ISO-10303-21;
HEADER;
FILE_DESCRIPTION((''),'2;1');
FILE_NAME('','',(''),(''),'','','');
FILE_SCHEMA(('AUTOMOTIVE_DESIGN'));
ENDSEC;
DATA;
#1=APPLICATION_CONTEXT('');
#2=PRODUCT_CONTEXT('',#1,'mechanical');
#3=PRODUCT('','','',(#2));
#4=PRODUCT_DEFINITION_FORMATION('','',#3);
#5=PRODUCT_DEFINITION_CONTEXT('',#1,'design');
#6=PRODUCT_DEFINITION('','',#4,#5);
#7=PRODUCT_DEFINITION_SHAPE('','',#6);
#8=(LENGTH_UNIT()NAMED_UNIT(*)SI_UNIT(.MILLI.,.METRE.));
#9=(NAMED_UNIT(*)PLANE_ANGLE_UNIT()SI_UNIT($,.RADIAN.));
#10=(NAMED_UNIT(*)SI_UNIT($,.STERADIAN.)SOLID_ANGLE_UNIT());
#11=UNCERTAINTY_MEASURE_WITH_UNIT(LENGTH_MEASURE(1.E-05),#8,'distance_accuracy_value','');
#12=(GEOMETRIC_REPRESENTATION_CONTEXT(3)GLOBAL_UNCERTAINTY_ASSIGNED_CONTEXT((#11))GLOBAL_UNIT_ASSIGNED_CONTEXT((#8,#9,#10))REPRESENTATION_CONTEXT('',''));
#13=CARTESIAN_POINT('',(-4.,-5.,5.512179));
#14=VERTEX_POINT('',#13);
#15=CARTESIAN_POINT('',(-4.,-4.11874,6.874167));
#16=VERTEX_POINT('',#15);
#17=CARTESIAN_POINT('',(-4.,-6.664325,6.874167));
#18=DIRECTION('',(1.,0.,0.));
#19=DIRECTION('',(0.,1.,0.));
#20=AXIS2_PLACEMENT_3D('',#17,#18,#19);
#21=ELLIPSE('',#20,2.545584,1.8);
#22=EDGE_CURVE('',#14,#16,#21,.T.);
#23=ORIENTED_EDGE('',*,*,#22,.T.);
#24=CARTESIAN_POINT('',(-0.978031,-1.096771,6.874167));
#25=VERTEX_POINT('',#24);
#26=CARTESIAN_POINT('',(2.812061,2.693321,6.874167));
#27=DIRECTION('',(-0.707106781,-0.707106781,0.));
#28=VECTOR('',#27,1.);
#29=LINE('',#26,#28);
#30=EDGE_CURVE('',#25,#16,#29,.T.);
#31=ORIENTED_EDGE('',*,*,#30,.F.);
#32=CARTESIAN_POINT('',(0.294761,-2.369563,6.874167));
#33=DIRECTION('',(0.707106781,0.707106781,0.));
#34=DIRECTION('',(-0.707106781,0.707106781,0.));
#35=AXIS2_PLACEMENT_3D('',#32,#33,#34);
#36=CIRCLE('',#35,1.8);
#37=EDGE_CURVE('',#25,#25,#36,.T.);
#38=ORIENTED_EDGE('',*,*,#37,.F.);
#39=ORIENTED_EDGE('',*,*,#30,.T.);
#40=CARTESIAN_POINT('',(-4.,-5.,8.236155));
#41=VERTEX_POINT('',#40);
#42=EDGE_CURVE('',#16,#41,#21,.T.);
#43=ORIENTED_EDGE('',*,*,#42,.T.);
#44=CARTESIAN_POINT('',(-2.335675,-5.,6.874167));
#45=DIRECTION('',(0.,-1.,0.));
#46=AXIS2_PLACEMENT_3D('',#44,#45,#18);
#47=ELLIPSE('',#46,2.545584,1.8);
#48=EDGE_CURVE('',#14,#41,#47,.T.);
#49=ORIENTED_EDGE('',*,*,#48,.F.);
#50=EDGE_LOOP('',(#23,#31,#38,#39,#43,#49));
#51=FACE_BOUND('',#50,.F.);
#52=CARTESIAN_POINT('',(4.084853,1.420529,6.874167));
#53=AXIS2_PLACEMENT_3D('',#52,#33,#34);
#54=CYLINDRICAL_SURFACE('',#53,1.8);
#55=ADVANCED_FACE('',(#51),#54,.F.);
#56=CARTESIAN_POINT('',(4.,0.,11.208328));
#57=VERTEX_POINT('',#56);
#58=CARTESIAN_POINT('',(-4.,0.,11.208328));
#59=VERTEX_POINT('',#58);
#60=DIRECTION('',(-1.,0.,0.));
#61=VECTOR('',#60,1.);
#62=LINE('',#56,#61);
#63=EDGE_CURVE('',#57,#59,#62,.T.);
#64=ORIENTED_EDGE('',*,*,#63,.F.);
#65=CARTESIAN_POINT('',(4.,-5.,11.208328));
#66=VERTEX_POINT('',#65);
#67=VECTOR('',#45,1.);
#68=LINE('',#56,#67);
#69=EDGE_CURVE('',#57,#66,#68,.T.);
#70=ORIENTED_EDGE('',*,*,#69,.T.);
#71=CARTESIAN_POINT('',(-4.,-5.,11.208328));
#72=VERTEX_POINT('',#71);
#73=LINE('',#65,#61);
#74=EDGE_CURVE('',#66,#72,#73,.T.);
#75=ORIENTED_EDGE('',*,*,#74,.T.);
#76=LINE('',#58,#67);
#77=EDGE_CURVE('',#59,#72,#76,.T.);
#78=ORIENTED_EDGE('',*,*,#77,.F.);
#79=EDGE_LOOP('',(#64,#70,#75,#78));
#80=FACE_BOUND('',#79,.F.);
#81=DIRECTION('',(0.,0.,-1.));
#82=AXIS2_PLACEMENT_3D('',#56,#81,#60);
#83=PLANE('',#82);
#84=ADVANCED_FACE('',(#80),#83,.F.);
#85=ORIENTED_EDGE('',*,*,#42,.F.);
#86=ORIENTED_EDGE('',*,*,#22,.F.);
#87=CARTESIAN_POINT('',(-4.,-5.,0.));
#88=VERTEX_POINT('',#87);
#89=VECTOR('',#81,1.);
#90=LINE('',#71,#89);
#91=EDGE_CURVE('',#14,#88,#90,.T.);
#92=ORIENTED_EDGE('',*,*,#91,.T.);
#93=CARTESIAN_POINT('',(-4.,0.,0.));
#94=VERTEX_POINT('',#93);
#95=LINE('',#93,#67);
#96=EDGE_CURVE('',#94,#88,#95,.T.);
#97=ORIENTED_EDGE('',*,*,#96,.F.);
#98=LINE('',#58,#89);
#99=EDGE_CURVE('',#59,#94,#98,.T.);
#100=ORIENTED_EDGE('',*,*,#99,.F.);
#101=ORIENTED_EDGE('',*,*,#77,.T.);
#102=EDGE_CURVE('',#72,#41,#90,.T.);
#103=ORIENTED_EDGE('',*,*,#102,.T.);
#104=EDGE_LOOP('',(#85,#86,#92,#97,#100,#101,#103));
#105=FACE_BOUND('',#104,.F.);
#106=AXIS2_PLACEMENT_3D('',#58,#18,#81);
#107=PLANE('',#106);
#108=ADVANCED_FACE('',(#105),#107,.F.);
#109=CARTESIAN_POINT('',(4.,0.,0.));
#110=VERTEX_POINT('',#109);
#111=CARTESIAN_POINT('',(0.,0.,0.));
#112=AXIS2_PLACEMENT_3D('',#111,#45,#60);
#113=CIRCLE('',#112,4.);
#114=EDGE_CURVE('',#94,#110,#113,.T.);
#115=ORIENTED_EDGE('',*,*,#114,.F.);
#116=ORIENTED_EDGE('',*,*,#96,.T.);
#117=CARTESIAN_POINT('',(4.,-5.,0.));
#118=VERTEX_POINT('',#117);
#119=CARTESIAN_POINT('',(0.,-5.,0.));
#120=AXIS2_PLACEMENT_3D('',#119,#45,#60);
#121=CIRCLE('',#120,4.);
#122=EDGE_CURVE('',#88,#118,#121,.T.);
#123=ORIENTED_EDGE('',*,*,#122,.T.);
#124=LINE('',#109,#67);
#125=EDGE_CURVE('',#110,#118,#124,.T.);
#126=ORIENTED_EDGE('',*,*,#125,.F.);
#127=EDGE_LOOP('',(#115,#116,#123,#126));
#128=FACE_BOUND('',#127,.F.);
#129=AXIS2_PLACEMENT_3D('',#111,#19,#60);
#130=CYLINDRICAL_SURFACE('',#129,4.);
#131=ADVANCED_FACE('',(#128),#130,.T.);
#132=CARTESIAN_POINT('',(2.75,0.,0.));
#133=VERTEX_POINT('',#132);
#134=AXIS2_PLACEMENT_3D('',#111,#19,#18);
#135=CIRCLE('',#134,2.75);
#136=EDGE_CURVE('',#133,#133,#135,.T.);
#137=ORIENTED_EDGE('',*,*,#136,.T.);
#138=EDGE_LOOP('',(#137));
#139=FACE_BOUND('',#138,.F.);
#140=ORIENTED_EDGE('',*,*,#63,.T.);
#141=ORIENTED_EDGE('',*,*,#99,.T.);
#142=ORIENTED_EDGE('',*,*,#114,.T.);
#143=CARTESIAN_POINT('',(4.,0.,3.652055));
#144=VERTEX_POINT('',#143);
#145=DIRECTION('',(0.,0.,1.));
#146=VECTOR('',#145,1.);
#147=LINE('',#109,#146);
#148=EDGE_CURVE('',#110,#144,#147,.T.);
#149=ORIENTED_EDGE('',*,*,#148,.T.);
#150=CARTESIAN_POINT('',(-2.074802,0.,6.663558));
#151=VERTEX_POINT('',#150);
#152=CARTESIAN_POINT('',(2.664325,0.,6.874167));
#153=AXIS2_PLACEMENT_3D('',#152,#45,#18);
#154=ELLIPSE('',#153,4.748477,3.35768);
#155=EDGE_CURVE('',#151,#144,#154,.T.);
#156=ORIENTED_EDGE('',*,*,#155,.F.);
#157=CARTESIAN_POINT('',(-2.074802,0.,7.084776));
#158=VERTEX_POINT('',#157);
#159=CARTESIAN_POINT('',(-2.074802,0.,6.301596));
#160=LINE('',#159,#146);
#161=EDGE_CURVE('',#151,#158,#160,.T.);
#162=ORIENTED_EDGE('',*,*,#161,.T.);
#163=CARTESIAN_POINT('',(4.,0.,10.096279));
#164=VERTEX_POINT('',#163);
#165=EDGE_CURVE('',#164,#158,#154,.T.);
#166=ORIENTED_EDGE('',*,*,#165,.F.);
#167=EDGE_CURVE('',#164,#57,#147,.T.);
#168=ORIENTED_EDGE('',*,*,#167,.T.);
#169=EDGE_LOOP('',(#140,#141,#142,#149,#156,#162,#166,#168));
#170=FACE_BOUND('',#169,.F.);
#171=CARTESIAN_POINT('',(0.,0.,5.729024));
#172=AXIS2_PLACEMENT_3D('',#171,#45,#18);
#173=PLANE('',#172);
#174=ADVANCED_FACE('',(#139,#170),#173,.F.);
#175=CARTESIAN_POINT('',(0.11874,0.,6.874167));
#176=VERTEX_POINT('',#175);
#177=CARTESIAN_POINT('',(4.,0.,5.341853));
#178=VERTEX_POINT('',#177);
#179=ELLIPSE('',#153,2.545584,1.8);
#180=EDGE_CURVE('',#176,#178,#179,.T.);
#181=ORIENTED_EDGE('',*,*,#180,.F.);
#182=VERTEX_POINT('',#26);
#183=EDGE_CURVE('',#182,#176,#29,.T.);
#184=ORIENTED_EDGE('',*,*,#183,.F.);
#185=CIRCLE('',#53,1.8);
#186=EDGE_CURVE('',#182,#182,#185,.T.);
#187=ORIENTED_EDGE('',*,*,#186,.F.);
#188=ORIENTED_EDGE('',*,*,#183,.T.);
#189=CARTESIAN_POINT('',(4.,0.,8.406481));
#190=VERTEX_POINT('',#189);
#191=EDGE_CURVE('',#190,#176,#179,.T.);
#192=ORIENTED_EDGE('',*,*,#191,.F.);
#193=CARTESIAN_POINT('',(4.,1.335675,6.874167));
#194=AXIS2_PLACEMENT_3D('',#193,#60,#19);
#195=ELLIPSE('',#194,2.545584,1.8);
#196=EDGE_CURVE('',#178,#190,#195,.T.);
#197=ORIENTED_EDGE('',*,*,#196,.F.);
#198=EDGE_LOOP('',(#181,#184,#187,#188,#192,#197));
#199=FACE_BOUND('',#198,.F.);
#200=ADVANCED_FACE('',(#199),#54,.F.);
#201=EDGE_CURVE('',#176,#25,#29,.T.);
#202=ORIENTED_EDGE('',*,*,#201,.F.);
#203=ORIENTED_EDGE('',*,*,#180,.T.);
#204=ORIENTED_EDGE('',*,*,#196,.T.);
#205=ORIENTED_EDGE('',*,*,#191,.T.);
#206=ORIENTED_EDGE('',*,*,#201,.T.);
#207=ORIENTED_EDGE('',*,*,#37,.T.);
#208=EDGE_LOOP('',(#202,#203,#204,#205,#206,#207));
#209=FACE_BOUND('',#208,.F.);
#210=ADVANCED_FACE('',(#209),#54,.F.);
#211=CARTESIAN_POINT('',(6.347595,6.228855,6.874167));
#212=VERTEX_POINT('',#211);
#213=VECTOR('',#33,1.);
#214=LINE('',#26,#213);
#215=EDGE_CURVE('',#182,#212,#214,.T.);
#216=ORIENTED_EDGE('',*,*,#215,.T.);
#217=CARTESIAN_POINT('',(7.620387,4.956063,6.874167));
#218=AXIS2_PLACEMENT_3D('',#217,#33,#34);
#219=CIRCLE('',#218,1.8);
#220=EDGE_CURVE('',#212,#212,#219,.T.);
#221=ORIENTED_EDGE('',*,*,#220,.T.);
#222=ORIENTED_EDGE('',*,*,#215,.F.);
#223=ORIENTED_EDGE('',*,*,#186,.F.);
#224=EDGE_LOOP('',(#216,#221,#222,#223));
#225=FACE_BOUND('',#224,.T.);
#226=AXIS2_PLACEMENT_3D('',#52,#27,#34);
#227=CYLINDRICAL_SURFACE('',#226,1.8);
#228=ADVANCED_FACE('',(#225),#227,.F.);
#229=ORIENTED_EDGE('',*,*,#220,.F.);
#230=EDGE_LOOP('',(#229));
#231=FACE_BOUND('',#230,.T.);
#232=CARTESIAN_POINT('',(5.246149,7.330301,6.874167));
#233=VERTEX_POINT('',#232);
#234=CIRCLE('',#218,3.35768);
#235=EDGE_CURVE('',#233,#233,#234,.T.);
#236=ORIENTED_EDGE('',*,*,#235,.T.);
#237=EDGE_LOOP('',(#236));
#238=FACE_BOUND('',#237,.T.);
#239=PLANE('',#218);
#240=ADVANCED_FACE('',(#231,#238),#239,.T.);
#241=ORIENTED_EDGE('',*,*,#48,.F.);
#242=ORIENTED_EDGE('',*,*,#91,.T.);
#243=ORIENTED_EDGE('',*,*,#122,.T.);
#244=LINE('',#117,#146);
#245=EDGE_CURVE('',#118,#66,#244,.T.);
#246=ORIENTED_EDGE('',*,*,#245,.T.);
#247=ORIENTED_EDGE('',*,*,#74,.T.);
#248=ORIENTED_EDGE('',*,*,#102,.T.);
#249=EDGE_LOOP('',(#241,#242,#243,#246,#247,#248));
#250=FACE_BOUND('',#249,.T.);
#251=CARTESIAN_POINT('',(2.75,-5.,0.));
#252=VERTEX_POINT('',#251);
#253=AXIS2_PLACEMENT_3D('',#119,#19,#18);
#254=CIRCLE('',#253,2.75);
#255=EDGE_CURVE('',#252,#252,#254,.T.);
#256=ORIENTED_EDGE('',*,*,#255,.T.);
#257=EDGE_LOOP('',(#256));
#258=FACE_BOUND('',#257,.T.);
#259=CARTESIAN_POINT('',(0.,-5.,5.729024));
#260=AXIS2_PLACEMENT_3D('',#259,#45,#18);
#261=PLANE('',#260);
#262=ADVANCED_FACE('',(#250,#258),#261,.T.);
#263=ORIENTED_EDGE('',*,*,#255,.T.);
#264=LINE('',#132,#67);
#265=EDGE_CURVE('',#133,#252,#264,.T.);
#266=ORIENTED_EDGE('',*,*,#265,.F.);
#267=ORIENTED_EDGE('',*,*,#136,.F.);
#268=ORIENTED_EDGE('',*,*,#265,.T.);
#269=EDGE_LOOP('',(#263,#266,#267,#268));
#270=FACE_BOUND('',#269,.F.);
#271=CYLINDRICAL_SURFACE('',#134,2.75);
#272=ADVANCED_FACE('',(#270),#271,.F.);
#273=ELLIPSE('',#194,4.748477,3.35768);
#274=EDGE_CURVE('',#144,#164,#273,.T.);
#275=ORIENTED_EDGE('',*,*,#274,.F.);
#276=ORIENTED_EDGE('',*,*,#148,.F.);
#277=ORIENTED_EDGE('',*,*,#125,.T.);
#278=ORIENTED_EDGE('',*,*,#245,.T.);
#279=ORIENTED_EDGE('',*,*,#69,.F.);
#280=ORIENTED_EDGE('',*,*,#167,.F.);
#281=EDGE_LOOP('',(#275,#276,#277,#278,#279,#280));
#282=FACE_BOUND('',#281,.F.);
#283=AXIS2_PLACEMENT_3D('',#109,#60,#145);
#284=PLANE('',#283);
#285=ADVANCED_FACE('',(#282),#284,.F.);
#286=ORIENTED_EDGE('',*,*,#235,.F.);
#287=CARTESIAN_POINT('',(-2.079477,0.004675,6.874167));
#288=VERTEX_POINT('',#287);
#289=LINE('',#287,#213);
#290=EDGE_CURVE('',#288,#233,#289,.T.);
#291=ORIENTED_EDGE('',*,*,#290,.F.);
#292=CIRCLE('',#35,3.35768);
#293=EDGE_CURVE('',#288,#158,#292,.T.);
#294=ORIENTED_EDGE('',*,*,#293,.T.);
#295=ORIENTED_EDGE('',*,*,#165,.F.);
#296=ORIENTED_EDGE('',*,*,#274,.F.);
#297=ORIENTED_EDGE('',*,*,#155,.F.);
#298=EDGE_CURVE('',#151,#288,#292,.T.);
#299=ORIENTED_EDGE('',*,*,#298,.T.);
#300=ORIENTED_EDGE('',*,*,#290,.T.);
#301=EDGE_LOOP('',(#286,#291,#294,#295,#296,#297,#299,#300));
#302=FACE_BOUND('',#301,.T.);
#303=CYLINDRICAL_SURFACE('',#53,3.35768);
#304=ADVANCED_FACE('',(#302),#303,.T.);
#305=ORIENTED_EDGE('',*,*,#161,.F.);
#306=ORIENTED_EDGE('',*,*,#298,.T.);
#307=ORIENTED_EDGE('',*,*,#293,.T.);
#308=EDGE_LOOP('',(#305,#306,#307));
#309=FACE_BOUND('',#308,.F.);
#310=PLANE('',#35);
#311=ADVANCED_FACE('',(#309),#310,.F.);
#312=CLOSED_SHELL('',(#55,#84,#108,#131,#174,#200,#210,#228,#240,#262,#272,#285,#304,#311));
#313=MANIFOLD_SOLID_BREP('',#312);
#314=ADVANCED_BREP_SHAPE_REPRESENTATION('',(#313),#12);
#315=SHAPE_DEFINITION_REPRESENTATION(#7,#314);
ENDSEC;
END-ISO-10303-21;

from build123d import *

# Parameters (mm, degrees)
F1_DEPTH      = 5
F4_R          = 1.8
F5_DEPTH      = 25
F4_R_2        = 3.3576804347
F6_DEPTH      = 5
F6_DEPTH_BACK = 5.36


with BuildPart() as f1:
    # F0 (on Front) → F1 (new body)
    with BuildSketch(Plane.XZ):
        with BuildLine():
            ThreePointArc((-4, 0), (0, 4), (4, 0))
            Line((4, 0), (4, 11.2083284184))
            Line((4, 11.2083284184), (-4, 11.2083284184))
            Line((-4, 11.2083284184), (-4, 0))
        make_face()
        with BuildLine():
            Line((4, 0), (2.75, 0))
            ThreePointArc((2.75, 0), (0, -2.75), (-2.75, 0))
            Line((-2.75, 0), (-4, 0))
            ThreePointArc((-4, 0), (0, -4), (4, 0))
        make_face()
        with BuildLine():
            ThreePointArc((-2.75, 0), (0, 2.75), (2.75, 0))
            Line((2.75, 0), (4, 0))
            ThreePointArc((4, 0), (0, 4), (-4, 0))
            Line((-4, 0), (-2.75, 0))
        make_face()
    extrude(amount=F1_DEPTH)

    # F4 (on face) → F5 (cut)
    with BuildSketch(Plane(origin=(2.7526911935, 2.7526911935, 0), x_dir=(-0.7071067812, 0.7071067812, 0), z_dir=(0.7071067812, 0.7071067812, 0))):
        with Locations((-1.8839619588, 6.8741668947)):
            Circle(F4_R)
    extrude(amount=-F5_DEPTH, mode=Mode.SUBTRACT)

    # F4 (on face) → F6 (join, two sides)
    with BuildSketch(Plane(origin=(2.7526911935, 2.7526911935, 0), x_dir=(-0.7071067812, 0.7071067812, 0), z_dir=(0.7071067812, 0.7071067812, 0))) as f6_sk:
        with Locations((-1.8839619588, 6.8741668947)):
            Circle(F4_R_2)
        with Locations((-1.8839619588, 6.8741668947)):
            Circle(F4_R, mode=Mode.SUBTRACT)
    extrude(amount=F6_DEPTH)
    extrude(f6_sk.sketch, amount=-F6_DEPTH_BACK)


solid = f1.part
